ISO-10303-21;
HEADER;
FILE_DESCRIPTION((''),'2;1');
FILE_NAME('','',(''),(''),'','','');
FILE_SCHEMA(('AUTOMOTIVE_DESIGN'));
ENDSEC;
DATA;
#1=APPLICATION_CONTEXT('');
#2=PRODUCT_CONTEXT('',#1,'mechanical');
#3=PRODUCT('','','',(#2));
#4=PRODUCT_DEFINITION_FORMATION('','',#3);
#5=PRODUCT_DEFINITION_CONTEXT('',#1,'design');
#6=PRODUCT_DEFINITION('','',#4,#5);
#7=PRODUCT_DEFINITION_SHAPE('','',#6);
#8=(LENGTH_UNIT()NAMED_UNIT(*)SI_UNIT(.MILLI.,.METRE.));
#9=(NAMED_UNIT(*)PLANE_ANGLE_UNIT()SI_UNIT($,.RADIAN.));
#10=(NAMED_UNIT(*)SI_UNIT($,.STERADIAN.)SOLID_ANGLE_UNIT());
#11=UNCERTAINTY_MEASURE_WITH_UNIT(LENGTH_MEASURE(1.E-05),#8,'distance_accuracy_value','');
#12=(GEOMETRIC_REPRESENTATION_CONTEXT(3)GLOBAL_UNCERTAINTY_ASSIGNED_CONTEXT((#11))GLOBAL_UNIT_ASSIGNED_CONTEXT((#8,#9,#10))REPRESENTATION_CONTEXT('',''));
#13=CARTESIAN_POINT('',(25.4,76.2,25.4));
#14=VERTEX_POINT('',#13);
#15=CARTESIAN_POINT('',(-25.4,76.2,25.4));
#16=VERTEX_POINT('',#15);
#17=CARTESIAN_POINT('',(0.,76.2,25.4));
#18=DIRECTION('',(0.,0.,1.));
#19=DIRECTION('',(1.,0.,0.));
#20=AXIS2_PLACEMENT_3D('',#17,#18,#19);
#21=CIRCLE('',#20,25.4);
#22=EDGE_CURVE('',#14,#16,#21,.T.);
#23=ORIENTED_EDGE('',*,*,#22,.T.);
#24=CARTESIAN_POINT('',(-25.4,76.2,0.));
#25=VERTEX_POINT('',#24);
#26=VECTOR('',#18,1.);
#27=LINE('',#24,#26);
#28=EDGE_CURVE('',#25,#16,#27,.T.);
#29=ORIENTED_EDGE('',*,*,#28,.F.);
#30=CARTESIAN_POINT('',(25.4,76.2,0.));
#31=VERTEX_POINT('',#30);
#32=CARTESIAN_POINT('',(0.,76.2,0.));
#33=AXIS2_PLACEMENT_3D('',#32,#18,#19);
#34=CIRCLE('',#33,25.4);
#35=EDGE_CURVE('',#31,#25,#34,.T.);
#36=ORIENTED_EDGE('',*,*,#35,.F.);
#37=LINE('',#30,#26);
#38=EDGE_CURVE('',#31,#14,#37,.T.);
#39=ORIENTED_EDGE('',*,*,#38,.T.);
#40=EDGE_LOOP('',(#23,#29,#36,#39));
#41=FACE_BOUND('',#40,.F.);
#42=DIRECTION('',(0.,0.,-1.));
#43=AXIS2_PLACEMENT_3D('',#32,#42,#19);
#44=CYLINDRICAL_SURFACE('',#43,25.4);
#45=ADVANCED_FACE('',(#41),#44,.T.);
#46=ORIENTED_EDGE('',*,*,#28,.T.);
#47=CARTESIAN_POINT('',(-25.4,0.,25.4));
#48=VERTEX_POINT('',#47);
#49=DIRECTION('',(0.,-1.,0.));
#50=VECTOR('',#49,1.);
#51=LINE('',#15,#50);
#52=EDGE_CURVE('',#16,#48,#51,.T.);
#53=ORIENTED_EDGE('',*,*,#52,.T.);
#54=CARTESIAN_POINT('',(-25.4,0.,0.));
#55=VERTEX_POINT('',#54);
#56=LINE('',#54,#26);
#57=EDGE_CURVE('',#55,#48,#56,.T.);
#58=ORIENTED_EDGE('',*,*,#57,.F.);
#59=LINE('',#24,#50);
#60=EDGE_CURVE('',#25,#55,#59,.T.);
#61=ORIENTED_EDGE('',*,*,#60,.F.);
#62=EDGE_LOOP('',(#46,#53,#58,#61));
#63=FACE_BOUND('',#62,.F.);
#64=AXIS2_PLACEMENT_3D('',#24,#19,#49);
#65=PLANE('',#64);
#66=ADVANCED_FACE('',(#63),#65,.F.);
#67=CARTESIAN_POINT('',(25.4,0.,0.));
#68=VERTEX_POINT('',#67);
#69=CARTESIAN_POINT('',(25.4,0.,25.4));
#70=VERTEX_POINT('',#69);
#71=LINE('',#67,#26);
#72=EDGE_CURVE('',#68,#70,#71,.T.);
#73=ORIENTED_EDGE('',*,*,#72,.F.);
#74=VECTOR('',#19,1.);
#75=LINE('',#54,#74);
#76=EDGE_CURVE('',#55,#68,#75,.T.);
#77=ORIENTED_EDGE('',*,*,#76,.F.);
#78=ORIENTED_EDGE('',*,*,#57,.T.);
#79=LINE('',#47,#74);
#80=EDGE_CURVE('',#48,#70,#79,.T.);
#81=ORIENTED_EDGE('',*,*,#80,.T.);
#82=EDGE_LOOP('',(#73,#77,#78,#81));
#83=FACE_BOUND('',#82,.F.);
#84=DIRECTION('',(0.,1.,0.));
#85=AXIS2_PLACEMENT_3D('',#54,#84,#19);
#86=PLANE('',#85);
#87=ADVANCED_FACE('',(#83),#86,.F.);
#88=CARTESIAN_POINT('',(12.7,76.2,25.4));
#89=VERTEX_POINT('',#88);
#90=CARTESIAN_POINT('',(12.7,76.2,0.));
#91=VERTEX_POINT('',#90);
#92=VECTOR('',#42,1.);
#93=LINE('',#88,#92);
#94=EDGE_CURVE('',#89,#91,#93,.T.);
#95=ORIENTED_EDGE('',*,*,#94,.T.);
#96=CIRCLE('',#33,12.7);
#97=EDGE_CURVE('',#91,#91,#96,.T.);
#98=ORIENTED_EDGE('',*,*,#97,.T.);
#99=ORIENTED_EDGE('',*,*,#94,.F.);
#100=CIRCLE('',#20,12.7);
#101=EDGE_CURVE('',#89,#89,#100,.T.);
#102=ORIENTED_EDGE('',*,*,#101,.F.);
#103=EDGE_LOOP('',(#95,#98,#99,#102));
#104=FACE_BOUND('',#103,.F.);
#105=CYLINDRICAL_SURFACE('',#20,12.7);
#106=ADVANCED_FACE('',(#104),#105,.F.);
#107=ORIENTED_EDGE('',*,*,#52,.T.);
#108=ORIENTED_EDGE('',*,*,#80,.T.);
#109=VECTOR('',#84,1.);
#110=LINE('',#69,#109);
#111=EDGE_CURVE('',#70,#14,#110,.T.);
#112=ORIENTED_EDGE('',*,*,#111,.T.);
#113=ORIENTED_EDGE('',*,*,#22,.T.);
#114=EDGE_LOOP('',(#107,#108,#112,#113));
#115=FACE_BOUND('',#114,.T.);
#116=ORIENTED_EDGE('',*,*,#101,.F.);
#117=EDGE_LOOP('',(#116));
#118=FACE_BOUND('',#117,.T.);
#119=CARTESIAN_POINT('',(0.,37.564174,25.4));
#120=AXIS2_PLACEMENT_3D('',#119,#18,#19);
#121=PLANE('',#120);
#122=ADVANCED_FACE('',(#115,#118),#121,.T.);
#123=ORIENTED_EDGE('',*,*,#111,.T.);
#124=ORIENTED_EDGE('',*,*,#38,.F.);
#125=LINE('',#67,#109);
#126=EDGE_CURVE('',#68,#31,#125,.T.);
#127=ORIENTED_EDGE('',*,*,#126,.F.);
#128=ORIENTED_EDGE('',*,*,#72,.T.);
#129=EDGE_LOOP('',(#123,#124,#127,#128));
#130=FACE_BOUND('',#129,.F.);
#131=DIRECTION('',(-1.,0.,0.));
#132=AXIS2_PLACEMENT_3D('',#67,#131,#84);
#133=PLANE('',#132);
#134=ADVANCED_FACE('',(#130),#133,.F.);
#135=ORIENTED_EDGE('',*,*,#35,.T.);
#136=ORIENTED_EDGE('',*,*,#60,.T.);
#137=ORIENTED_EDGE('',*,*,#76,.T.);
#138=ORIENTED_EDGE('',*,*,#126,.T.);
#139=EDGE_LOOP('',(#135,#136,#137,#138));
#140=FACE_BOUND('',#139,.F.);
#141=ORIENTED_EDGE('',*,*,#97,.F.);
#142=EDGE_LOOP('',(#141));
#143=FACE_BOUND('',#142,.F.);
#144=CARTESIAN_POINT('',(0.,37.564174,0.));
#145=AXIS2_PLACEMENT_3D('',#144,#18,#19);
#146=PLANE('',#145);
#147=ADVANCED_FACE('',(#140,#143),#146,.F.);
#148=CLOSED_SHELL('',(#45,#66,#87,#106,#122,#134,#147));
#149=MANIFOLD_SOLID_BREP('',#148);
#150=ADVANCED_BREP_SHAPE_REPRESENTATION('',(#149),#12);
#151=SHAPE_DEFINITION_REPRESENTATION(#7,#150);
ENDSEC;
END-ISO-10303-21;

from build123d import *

# Parameters (mm, degrees)
F1_DEPTH = 25.4
F2_R     = 12.7
F3_DEPTH = 25.4


with BuildPart() as f1:
    # F0 (on Top) → F1 (new body)
    with BuildSketch(Plane.XY):
        with BuildLine():
            Line((-25.4, 76.2), (-25.4, 0))
            Line((-25.4, 0), (25.4, 0))
            Line((25.4, 0), (25.4, 76.2))
            ThreePointArc((25.4, 76.2), (0, 50.8), (-25.4, 76.2))
        make_face()
        with BuildLine():
            ThreePointArc((25.4, 76.2), (0, 101.6), (-25.4, 76.2))
            Line((-25.4, 76.2), (25.4, 76.2))
        make_face()
        with BuildLine():
            Line((25.4, 76.2), (-25.4, 76.2))
            ThreePointArc((-25.4, 76.2), (0, 50.8), (25.4, 76.2))
        make_face()
    extrude(amount=F1_DEPTH)

    # F2 (on face) → F3 (cut)
    with BuildSketch(Plane.XY.offset(25.4)):
        with Locations((0, 76.2)):
            Circle(F2_R)
    extrude(amount=-F3_DEPTH, mode=Mode.SUBTRACT)


solid = f1.part
